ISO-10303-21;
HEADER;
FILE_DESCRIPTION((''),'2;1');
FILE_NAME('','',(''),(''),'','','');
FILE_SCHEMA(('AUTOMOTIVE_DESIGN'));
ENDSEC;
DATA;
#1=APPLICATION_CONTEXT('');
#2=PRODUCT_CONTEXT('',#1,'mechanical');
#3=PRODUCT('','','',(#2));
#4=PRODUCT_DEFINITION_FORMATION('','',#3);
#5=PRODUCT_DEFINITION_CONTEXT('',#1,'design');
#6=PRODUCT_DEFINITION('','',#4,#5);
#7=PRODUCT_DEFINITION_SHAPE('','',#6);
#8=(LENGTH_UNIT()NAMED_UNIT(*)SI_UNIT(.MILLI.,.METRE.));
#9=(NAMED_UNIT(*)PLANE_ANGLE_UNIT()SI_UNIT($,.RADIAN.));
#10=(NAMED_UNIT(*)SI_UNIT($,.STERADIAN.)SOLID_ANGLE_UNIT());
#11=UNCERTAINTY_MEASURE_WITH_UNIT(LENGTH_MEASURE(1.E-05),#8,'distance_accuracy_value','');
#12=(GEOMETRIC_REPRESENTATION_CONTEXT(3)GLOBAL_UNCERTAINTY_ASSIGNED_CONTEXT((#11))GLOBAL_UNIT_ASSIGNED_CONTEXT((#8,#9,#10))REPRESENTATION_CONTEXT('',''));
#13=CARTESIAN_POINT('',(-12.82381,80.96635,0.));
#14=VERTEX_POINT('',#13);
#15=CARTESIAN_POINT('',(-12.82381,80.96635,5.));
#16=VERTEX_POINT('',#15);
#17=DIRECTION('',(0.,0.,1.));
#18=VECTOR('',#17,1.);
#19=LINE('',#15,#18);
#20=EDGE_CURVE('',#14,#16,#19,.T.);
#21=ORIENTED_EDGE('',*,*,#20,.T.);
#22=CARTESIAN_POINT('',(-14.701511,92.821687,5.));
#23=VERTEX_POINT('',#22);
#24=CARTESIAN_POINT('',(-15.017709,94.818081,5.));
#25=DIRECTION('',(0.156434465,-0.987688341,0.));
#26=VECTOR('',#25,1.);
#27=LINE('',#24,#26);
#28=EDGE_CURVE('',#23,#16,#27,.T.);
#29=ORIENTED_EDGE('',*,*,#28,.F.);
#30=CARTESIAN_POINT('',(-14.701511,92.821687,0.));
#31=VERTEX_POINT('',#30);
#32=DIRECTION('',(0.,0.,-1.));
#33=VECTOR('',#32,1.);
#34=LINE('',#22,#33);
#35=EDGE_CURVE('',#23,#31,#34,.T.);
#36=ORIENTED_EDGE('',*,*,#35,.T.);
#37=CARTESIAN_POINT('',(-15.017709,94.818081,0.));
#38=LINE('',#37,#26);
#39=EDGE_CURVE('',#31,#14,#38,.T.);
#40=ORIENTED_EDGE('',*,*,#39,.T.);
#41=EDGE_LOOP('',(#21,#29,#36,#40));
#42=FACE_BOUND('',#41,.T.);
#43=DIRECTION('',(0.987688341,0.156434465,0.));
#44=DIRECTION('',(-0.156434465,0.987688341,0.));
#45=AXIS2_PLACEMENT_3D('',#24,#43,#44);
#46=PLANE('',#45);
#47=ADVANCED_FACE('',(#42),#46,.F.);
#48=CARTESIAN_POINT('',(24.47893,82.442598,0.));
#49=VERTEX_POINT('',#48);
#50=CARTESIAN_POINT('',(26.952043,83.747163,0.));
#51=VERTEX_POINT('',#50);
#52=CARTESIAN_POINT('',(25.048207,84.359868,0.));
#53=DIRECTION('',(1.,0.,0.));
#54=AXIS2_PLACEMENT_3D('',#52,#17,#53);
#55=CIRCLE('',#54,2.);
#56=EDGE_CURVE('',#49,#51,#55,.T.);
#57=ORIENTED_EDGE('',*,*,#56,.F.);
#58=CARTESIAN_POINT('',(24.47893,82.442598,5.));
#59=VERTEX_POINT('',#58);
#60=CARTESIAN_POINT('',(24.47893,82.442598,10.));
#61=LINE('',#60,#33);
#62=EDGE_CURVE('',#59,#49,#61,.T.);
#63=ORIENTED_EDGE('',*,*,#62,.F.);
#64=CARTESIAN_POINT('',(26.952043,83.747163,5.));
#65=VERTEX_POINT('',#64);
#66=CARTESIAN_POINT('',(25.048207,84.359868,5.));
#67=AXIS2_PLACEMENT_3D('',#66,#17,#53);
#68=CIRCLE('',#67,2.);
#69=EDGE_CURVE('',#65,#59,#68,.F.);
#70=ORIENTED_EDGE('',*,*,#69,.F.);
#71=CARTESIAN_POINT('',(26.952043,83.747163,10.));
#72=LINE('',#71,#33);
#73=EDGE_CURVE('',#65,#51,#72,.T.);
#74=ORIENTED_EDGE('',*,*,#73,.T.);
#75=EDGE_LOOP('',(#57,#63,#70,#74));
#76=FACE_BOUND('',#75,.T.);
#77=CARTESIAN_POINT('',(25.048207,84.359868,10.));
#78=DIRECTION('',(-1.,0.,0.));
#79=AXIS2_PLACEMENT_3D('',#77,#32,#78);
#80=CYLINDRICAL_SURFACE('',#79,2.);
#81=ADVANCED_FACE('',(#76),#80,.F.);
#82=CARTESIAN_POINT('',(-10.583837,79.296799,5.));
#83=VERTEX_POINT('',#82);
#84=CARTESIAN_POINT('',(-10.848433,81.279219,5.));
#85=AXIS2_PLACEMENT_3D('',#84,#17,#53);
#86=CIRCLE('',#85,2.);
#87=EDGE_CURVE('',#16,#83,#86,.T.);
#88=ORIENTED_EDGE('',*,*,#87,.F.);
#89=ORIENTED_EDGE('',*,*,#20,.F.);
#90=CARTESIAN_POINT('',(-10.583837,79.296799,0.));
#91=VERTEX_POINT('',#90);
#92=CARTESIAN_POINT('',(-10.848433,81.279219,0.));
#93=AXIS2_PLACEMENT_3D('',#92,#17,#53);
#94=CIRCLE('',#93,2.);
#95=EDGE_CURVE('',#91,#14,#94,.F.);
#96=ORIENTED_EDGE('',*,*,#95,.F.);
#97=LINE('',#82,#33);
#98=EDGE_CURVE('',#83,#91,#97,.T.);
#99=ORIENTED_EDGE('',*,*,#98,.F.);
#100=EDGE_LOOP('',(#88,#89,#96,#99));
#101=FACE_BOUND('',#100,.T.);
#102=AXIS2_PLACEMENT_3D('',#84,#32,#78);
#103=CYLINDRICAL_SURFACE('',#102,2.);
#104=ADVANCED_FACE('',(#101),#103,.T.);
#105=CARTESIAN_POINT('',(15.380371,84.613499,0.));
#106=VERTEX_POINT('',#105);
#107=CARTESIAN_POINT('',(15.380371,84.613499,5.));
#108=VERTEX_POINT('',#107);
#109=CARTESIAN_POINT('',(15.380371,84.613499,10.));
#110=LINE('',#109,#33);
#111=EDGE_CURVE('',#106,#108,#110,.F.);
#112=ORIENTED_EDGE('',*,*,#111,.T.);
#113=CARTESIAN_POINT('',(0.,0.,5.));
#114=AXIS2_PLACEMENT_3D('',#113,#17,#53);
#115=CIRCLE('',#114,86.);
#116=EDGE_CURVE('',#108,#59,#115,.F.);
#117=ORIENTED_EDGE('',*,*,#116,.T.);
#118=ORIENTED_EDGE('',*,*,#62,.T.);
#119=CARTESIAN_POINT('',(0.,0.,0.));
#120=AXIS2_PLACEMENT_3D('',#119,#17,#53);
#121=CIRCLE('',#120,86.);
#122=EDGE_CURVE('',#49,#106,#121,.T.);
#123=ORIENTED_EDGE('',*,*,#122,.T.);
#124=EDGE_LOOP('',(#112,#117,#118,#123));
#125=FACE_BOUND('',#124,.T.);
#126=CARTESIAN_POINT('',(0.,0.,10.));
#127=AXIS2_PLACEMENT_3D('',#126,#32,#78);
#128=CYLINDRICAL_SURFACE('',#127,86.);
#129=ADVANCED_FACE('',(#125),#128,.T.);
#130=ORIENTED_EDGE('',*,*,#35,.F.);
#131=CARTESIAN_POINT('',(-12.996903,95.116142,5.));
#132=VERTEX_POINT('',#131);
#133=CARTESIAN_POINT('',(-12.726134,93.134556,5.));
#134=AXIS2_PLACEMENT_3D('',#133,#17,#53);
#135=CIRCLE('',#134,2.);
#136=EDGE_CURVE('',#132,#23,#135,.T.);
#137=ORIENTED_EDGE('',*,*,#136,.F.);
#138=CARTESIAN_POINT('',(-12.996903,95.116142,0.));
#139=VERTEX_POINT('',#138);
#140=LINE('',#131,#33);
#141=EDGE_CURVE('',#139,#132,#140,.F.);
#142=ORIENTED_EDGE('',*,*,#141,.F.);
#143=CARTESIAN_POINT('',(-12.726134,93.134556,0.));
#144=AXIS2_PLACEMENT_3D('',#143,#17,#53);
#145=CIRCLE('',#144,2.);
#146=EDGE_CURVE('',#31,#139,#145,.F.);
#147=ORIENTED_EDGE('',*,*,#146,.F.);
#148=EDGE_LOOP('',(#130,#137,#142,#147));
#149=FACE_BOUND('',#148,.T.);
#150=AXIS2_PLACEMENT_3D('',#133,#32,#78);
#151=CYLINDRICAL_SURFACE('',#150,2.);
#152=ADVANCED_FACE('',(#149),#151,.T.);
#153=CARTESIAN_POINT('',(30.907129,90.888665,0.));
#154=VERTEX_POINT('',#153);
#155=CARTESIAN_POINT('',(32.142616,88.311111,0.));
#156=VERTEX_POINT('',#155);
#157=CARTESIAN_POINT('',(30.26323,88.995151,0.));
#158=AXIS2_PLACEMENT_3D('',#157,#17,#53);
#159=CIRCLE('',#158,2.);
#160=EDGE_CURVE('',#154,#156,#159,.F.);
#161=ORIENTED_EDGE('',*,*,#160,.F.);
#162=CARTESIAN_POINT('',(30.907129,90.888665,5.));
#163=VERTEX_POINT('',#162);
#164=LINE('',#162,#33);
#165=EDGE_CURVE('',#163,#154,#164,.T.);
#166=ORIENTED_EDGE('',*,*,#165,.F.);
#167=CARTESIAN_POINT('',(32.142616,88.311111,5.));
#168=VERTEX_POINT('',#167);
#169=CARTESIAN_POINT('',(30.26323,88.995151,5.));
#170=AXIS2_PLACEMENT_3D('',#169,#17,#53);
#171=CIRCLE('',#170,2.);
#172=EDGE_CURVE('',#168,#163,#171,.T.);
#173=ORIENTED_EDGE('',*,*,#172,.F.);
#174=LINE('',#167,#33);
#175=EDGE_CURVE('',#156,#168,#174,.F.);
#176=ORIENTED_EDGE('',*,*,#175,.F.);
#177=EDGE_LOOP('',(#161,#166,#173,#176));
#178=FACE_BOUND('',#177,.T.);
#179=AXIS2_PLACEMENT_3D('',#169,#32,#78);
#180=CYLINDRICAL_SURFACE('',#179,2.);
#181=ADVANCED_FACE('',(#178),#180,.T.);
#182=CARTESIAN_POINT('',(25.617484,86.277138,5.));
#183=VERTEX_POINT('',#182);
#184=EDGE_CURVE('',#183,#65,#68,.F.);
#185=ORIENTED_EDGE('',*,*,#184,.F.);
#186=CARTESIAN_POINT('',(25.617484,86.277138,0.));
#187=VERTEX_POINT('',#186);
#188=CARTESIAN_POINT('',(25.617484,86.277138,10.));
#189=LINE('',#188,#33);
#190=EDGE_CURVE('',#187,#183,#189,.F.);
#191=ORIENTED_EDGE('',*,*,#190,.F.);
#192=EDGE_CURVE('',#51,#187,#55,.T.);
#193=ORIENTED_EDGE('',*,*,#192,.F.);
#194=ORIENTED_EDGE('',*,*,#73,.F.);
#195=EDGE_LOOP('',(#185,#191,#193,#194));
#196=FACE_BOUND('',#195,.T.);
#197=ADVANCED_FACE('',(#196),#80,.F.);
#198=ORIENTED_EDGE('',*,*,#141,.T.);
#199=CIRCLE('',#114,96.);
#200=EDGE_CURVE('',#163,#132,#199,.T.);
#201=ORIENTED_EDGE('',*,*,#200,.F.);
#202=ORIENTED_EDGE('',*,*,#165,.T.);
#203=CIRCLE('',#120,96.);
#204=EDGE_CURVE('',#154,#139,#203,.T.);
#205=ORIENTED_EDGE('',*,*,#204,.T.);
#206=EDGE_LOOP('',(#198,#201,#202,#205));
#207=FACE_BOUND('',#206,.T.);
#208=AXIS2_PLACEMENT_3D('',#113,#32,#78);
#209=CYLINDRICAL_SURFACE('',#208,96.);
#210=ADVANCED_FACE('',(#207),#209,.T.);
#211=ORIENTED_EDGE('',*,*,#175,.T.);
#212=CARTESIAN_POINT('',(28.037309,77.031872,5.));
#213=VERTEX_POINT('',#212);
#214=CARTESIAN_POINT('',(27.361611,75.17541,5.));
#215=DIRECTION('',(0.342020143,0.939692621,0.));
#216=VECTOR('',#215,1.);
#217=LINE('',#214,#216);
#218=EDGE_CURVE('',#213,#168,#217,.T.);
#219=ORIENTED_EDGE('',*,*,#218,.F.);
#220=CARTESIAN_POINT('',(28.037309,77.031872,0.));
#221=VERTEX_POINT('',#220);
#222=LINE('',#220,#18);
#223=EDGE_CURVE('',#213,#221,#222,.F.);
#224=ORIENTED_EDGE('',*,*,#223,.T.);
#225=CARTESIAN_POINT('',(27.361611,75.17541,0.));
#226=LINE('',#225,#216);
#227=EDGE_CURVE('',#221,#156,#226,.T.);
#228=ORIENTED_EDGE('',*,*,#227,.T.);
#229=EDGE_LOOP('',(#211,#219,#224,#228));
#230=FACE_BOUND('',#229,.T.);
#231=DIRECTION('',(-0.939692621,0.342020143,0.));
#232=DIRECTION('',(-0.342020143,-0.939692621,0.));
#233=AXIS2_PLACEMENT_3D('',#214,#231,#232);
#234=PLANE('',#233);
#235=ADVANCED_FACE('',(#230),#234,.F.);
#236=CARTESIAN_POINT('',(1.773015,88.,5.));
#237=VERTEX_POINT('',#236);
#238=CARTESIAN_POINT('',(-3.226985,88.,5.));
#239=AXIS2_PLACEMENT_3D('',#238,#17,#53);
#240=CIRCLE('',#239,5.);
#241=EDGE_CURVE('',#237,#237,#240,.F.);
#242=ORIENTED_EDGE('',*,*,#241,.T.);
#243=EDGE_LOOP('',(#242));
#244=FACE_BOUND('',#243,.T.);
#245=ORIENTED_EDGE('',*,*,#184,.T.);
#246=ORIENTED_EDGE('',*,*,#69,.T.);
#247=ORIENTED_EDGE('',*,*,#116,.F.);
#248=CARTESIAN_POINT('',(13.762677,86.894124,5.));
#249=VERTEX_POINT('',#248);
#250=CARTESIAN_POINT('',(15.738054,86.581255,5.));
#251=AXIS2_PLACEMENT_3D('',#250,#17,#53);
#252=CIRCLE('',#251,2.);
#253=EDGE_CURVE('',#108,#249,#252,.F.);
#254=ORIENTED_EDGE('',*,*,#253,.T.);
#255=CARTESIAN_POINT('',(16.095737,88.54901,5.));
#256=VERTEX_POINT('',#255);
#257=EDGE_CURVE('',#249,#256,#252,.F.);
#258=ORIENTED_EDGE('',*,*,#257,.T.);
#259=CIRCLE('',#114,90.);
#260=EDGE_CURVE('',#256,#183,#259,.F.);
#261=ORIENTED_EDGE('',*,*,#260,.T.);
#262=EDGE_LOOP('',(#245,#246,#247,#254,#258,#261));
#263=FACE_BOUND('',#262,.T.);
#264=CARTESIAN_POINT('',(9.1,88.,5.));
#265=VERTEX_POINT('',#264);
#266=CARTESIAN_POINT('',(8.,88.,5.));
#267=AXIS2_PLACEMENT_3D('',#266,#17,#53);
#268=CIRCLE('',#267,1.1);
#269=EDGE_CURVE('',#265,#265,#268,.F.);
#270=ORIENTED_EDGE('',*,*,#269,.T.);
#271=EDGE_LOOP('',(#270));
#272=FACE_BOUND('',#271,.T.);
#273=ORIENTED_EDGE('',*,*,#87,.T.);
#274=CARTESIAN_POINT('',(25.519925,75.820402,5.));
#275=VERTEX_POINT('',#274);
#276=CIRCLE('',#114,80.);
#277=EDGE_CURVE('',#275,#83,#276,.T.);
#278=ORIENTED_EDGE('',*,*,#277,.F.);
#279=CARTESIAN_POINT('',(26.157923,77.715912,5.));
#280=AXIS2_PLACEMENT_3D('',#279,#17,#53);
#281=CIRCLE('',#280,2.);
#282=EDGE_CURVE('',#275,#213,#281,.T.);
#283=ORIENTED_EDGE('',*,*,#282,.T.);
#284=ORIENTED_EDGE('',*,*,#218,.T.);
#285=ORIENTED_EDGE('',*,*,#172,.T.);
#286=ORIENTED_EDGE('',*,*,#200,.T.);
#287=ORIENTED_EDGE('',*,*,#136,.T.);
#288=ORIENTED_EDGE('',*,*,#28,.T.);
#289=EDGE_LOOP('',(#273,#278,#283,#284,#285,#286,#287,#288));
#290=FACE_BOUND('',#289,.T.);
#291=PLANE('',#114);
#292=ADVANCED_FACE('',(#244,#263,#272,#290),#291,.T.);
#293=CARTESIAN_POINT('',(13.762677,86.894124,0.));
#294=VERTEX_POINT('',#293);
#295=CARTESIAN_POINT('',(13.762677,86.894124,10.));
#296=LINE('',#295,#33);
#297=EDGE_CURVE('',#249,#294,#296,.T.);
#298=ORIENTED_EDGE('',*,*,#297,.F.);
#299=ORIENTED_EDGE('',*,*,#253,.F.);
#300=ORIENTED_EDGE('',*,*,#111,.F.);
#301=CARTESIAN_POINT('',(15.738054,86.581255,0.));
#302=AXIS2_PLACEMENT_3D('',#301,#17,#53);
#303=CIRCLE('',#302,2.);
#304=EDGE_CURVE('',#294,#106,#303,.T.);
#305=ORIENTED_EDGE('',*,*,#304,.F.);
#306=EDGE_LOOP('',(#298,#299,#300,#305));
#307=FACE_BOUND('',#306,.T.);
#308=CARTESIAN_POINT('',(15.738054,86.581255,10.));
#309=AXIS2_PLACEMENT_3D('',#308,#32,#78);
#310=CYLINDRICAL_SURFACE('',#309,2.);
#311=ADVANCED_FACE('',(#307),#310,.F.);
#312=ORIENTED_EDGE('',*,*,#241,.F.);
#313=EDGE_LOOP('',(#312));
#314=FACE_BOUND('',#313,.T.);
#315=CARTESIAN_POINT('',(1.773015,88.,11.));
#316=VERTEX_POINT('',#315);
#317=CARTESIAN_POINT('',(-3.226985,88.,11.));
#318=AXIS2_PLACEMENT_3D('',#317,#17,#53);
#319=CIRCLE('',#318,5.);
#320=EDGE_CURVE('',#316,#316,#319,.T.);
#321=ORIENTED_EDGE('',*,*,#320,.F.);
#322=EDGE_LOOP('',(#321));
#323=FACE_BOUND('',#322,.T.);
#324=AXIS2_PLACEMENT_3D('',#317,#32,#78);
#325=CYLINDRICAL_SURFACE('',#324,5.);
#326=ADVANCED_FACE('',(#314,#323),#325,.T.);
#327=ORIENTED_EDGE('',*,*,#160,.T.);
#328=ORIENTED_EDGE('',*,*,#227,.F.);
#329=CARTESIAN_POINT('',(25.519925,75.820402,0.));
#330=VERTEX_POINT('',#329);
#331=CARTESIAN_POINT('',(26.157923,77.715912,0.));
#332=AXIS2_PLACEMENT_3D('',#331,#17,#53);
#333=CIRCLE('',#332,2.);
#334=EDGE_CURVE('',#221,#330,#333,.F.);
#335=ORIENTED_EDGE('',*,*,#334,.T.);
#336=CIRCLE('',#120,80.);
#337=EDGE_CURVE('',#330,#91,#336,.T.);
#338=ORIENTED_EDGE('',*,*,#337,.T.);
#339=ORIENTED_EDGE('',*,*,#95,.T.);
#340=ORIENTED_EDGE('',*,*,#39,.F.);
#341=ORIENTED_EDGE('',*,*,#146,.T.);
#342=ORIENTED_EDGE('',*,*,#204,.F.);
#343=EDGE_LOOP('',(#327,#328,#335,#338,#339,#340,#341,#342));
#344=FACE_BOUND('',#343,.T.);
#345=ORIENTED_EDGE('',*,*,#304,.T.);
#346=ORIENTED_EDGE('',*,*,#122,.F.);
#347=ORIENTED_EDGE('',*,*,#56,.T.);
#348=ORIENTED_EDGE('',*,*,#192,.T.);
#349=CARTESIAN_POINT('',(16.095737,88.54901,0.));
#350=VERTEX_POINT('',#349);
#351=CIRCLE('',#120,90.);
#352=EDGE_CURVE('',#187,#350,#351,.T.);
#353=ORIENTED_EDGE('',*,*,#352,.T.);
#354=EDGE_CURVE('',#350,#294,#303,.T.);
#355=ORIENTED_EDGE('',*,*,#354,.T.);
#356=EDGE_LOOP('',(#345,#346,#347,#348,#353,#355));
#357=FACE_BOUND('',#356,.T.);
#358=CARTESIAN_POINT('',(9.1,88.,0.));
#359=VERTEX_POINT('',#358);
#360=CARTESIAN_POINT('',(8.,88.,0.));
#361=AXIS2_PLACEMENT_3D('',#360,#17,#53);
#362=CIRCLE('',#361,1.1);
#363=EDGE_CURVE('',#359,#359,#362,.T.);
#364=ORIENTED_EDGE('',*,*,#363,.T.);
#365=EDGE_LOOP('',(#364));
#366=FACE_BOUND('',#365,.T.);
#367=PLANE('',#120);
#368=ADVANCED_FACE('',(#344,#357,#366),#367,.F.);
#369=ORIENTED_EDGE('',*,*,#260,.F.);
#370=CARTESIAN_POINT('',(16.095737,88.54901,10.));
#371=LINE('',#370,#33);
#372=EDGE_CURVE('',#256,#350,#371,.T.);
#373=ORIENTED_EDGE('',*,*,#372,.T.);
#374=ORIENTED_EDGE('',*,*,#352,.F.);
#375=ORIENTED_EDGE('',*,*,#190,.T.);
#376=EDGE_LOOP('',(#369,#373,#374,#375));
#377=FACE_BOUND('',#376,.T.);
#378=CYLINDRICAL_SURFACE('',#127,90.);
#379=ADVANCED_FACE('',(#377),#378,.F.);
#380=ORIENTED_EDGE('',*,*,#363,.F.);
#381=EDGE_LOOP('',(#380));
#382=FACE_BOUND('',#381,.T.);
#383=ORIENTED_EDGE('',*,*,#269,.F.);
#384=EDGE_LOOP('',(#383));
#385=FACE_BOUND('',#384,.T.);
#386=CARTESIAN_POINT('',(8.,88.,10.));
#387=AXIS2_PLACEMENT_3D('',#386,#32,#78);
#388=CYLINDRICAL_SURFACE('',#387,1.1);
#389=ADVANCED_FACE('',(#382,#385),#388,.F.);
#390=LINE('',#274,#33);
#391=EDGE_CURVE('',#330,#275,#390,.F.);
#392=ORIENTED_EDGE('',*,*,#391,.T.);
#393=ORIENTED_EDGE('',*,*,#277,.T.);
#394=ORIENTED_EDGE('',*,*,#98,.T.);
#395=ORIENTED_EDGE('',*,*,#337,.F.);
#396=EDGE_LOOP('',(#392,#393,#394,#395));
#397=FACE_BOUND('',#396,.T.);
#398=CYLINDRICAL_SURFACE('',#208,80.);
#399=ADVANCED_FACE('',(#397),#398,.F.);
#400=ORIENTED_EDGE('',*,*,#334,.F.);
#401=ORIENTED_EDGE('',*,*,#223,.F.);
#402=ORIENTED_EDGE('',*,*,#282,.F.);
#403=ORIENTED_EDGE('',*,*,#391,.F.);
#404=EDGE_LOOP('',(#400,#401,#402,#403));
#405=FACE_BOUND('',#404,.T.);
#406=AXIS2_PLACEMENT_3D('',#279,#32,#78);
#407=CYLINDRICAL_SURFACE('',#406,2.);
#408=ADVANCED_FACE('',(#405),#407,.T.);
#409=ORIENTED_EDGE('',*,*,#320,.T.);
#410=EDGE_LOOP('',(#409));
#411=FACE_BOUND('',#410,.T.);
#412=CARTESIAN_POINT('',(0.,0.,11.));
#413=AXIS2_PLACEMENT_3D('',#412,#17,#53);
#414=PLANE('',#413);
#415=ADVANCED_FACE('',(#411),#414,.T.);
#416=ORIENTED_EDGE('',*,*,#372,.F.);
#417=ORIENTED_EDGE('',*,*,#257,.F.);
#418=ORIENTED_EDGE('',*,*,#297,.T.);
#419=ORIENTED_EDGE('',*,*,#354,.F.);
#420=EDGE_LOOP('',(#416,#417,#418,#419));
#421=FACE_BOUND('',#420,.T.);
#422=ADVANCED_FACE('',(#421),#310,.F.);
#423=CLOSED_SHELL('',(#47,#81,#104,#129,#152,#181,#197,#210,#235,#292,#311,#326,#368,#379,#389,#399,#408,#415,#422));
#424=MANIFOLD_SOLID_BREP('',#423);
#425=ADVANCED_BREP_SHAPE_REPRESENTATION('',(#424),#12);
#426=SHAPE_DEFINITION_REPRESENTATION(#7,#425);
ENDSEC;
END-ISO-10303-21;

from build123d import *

# Parameters (mm, degrees)
BOSS_EXTRUDE1_DEPTH = 5
SKETCH1_13_R        = 1.1
CUT_EXTRUDE2_DEPTH  = 10
FILLET1_R           = 2
BOSS_EXTRUDE2_DEPTH = 11


with BuildPart() as part:
    # Sketch1 → Boss-Extrude1 (new body)
    with BuildSketch(Plane.XY):
        with BuildLine():
            Line((27.361611466, 75.175409663), (32.833933759, 90.210491595))
            ThreePointArc((32.833933759, 90.210491595), (9.201192242, 95.558035043), (-15.017708644, 94.818080697))
            Line((-15.017708644, 94.818080697), (-12.514757203, 79.015067248))
            ThreePointArc((-12.514757203, 79.015067248), (7.667660202, 79.631695869), (27.361611466, 75.175409663))
        make_face()
    extrude(amount=BOSS_EXTRUDE1_DEPTH)

    # Sketch1<13> → Cut-Extrude2 (cut)
    with BuildSketch(Plane.XY):
        with BuildLine():
            ThreePointArc((13.453363993, 84.941197291), (19.959187303, 83.651843029), (26.346302102, 81.864964213))
            Line((26.346302102, 81.864964213), (27.571711502, 85.672636967))
            ThreePointArc((27.571711502, 85.672636967), (20.887521597, 87.542626426), (14.079101854, 88.891950654))
            Line((14.079101854, 88.891950654), (13.453363993, 84.941197291))
        make_face()
        with Locations((8, 88)):
            Circle(SKETCH1_13_R)
    extrude(amount=CUT_EXTRUDE2_DEPTH, mode=Mode.SUBTRACT)

    # Fillet1
    fillet1_edges = [part.edges().sort_by_distance(p)[0] for p in [
        (26.346302102, 81.864964213, 2.5),
        (27.571711502, 85.672636967, 2.5),
        (14.079101854, 88.891950654, 2.5),
        (13.453363993, 84.941197291, 2.5),
        (-12.514757203, 79.015067248, 2.5),
        (-15.017708644, 94.818080697, 2.5),
        (27.361611466, 75.175409663, 2.5),
        (32.833933759, 90.210491595, 2.5),
    ]]
    fillet(fillet1_edges, radius=FILLET1_R - 0.0001)  # a hair under: the kernel refuses the full size

    # Sketch1<14> → Boss-Extrude2 (add)
    with BuildSketch(Plane.XY):
        with BuildLine():
            ThreePointArc((-0.5, 92.19088917), (-8.226985142, 88), (-0.5, 83.80911083))
            Line((-0.5, 83.80911083), (-0.5, 92.19088917))
        make_face()
        with BuildLine():
            Line((-0.5, 92.19088917), (-0.5, 83.80911083))
            ThreePointArc((-0.5, 83.80911083), (1.168178433, 85.616192721), (1.773014858, 88))
            ThreePointArc((1.773014858, 88), (1.168178433, 90.383807279), (-0.5, 92.19088917))
        make_face()
    extrude(amount=BOSS_EXTRUDE2_DEPTH)


solid = part.part
